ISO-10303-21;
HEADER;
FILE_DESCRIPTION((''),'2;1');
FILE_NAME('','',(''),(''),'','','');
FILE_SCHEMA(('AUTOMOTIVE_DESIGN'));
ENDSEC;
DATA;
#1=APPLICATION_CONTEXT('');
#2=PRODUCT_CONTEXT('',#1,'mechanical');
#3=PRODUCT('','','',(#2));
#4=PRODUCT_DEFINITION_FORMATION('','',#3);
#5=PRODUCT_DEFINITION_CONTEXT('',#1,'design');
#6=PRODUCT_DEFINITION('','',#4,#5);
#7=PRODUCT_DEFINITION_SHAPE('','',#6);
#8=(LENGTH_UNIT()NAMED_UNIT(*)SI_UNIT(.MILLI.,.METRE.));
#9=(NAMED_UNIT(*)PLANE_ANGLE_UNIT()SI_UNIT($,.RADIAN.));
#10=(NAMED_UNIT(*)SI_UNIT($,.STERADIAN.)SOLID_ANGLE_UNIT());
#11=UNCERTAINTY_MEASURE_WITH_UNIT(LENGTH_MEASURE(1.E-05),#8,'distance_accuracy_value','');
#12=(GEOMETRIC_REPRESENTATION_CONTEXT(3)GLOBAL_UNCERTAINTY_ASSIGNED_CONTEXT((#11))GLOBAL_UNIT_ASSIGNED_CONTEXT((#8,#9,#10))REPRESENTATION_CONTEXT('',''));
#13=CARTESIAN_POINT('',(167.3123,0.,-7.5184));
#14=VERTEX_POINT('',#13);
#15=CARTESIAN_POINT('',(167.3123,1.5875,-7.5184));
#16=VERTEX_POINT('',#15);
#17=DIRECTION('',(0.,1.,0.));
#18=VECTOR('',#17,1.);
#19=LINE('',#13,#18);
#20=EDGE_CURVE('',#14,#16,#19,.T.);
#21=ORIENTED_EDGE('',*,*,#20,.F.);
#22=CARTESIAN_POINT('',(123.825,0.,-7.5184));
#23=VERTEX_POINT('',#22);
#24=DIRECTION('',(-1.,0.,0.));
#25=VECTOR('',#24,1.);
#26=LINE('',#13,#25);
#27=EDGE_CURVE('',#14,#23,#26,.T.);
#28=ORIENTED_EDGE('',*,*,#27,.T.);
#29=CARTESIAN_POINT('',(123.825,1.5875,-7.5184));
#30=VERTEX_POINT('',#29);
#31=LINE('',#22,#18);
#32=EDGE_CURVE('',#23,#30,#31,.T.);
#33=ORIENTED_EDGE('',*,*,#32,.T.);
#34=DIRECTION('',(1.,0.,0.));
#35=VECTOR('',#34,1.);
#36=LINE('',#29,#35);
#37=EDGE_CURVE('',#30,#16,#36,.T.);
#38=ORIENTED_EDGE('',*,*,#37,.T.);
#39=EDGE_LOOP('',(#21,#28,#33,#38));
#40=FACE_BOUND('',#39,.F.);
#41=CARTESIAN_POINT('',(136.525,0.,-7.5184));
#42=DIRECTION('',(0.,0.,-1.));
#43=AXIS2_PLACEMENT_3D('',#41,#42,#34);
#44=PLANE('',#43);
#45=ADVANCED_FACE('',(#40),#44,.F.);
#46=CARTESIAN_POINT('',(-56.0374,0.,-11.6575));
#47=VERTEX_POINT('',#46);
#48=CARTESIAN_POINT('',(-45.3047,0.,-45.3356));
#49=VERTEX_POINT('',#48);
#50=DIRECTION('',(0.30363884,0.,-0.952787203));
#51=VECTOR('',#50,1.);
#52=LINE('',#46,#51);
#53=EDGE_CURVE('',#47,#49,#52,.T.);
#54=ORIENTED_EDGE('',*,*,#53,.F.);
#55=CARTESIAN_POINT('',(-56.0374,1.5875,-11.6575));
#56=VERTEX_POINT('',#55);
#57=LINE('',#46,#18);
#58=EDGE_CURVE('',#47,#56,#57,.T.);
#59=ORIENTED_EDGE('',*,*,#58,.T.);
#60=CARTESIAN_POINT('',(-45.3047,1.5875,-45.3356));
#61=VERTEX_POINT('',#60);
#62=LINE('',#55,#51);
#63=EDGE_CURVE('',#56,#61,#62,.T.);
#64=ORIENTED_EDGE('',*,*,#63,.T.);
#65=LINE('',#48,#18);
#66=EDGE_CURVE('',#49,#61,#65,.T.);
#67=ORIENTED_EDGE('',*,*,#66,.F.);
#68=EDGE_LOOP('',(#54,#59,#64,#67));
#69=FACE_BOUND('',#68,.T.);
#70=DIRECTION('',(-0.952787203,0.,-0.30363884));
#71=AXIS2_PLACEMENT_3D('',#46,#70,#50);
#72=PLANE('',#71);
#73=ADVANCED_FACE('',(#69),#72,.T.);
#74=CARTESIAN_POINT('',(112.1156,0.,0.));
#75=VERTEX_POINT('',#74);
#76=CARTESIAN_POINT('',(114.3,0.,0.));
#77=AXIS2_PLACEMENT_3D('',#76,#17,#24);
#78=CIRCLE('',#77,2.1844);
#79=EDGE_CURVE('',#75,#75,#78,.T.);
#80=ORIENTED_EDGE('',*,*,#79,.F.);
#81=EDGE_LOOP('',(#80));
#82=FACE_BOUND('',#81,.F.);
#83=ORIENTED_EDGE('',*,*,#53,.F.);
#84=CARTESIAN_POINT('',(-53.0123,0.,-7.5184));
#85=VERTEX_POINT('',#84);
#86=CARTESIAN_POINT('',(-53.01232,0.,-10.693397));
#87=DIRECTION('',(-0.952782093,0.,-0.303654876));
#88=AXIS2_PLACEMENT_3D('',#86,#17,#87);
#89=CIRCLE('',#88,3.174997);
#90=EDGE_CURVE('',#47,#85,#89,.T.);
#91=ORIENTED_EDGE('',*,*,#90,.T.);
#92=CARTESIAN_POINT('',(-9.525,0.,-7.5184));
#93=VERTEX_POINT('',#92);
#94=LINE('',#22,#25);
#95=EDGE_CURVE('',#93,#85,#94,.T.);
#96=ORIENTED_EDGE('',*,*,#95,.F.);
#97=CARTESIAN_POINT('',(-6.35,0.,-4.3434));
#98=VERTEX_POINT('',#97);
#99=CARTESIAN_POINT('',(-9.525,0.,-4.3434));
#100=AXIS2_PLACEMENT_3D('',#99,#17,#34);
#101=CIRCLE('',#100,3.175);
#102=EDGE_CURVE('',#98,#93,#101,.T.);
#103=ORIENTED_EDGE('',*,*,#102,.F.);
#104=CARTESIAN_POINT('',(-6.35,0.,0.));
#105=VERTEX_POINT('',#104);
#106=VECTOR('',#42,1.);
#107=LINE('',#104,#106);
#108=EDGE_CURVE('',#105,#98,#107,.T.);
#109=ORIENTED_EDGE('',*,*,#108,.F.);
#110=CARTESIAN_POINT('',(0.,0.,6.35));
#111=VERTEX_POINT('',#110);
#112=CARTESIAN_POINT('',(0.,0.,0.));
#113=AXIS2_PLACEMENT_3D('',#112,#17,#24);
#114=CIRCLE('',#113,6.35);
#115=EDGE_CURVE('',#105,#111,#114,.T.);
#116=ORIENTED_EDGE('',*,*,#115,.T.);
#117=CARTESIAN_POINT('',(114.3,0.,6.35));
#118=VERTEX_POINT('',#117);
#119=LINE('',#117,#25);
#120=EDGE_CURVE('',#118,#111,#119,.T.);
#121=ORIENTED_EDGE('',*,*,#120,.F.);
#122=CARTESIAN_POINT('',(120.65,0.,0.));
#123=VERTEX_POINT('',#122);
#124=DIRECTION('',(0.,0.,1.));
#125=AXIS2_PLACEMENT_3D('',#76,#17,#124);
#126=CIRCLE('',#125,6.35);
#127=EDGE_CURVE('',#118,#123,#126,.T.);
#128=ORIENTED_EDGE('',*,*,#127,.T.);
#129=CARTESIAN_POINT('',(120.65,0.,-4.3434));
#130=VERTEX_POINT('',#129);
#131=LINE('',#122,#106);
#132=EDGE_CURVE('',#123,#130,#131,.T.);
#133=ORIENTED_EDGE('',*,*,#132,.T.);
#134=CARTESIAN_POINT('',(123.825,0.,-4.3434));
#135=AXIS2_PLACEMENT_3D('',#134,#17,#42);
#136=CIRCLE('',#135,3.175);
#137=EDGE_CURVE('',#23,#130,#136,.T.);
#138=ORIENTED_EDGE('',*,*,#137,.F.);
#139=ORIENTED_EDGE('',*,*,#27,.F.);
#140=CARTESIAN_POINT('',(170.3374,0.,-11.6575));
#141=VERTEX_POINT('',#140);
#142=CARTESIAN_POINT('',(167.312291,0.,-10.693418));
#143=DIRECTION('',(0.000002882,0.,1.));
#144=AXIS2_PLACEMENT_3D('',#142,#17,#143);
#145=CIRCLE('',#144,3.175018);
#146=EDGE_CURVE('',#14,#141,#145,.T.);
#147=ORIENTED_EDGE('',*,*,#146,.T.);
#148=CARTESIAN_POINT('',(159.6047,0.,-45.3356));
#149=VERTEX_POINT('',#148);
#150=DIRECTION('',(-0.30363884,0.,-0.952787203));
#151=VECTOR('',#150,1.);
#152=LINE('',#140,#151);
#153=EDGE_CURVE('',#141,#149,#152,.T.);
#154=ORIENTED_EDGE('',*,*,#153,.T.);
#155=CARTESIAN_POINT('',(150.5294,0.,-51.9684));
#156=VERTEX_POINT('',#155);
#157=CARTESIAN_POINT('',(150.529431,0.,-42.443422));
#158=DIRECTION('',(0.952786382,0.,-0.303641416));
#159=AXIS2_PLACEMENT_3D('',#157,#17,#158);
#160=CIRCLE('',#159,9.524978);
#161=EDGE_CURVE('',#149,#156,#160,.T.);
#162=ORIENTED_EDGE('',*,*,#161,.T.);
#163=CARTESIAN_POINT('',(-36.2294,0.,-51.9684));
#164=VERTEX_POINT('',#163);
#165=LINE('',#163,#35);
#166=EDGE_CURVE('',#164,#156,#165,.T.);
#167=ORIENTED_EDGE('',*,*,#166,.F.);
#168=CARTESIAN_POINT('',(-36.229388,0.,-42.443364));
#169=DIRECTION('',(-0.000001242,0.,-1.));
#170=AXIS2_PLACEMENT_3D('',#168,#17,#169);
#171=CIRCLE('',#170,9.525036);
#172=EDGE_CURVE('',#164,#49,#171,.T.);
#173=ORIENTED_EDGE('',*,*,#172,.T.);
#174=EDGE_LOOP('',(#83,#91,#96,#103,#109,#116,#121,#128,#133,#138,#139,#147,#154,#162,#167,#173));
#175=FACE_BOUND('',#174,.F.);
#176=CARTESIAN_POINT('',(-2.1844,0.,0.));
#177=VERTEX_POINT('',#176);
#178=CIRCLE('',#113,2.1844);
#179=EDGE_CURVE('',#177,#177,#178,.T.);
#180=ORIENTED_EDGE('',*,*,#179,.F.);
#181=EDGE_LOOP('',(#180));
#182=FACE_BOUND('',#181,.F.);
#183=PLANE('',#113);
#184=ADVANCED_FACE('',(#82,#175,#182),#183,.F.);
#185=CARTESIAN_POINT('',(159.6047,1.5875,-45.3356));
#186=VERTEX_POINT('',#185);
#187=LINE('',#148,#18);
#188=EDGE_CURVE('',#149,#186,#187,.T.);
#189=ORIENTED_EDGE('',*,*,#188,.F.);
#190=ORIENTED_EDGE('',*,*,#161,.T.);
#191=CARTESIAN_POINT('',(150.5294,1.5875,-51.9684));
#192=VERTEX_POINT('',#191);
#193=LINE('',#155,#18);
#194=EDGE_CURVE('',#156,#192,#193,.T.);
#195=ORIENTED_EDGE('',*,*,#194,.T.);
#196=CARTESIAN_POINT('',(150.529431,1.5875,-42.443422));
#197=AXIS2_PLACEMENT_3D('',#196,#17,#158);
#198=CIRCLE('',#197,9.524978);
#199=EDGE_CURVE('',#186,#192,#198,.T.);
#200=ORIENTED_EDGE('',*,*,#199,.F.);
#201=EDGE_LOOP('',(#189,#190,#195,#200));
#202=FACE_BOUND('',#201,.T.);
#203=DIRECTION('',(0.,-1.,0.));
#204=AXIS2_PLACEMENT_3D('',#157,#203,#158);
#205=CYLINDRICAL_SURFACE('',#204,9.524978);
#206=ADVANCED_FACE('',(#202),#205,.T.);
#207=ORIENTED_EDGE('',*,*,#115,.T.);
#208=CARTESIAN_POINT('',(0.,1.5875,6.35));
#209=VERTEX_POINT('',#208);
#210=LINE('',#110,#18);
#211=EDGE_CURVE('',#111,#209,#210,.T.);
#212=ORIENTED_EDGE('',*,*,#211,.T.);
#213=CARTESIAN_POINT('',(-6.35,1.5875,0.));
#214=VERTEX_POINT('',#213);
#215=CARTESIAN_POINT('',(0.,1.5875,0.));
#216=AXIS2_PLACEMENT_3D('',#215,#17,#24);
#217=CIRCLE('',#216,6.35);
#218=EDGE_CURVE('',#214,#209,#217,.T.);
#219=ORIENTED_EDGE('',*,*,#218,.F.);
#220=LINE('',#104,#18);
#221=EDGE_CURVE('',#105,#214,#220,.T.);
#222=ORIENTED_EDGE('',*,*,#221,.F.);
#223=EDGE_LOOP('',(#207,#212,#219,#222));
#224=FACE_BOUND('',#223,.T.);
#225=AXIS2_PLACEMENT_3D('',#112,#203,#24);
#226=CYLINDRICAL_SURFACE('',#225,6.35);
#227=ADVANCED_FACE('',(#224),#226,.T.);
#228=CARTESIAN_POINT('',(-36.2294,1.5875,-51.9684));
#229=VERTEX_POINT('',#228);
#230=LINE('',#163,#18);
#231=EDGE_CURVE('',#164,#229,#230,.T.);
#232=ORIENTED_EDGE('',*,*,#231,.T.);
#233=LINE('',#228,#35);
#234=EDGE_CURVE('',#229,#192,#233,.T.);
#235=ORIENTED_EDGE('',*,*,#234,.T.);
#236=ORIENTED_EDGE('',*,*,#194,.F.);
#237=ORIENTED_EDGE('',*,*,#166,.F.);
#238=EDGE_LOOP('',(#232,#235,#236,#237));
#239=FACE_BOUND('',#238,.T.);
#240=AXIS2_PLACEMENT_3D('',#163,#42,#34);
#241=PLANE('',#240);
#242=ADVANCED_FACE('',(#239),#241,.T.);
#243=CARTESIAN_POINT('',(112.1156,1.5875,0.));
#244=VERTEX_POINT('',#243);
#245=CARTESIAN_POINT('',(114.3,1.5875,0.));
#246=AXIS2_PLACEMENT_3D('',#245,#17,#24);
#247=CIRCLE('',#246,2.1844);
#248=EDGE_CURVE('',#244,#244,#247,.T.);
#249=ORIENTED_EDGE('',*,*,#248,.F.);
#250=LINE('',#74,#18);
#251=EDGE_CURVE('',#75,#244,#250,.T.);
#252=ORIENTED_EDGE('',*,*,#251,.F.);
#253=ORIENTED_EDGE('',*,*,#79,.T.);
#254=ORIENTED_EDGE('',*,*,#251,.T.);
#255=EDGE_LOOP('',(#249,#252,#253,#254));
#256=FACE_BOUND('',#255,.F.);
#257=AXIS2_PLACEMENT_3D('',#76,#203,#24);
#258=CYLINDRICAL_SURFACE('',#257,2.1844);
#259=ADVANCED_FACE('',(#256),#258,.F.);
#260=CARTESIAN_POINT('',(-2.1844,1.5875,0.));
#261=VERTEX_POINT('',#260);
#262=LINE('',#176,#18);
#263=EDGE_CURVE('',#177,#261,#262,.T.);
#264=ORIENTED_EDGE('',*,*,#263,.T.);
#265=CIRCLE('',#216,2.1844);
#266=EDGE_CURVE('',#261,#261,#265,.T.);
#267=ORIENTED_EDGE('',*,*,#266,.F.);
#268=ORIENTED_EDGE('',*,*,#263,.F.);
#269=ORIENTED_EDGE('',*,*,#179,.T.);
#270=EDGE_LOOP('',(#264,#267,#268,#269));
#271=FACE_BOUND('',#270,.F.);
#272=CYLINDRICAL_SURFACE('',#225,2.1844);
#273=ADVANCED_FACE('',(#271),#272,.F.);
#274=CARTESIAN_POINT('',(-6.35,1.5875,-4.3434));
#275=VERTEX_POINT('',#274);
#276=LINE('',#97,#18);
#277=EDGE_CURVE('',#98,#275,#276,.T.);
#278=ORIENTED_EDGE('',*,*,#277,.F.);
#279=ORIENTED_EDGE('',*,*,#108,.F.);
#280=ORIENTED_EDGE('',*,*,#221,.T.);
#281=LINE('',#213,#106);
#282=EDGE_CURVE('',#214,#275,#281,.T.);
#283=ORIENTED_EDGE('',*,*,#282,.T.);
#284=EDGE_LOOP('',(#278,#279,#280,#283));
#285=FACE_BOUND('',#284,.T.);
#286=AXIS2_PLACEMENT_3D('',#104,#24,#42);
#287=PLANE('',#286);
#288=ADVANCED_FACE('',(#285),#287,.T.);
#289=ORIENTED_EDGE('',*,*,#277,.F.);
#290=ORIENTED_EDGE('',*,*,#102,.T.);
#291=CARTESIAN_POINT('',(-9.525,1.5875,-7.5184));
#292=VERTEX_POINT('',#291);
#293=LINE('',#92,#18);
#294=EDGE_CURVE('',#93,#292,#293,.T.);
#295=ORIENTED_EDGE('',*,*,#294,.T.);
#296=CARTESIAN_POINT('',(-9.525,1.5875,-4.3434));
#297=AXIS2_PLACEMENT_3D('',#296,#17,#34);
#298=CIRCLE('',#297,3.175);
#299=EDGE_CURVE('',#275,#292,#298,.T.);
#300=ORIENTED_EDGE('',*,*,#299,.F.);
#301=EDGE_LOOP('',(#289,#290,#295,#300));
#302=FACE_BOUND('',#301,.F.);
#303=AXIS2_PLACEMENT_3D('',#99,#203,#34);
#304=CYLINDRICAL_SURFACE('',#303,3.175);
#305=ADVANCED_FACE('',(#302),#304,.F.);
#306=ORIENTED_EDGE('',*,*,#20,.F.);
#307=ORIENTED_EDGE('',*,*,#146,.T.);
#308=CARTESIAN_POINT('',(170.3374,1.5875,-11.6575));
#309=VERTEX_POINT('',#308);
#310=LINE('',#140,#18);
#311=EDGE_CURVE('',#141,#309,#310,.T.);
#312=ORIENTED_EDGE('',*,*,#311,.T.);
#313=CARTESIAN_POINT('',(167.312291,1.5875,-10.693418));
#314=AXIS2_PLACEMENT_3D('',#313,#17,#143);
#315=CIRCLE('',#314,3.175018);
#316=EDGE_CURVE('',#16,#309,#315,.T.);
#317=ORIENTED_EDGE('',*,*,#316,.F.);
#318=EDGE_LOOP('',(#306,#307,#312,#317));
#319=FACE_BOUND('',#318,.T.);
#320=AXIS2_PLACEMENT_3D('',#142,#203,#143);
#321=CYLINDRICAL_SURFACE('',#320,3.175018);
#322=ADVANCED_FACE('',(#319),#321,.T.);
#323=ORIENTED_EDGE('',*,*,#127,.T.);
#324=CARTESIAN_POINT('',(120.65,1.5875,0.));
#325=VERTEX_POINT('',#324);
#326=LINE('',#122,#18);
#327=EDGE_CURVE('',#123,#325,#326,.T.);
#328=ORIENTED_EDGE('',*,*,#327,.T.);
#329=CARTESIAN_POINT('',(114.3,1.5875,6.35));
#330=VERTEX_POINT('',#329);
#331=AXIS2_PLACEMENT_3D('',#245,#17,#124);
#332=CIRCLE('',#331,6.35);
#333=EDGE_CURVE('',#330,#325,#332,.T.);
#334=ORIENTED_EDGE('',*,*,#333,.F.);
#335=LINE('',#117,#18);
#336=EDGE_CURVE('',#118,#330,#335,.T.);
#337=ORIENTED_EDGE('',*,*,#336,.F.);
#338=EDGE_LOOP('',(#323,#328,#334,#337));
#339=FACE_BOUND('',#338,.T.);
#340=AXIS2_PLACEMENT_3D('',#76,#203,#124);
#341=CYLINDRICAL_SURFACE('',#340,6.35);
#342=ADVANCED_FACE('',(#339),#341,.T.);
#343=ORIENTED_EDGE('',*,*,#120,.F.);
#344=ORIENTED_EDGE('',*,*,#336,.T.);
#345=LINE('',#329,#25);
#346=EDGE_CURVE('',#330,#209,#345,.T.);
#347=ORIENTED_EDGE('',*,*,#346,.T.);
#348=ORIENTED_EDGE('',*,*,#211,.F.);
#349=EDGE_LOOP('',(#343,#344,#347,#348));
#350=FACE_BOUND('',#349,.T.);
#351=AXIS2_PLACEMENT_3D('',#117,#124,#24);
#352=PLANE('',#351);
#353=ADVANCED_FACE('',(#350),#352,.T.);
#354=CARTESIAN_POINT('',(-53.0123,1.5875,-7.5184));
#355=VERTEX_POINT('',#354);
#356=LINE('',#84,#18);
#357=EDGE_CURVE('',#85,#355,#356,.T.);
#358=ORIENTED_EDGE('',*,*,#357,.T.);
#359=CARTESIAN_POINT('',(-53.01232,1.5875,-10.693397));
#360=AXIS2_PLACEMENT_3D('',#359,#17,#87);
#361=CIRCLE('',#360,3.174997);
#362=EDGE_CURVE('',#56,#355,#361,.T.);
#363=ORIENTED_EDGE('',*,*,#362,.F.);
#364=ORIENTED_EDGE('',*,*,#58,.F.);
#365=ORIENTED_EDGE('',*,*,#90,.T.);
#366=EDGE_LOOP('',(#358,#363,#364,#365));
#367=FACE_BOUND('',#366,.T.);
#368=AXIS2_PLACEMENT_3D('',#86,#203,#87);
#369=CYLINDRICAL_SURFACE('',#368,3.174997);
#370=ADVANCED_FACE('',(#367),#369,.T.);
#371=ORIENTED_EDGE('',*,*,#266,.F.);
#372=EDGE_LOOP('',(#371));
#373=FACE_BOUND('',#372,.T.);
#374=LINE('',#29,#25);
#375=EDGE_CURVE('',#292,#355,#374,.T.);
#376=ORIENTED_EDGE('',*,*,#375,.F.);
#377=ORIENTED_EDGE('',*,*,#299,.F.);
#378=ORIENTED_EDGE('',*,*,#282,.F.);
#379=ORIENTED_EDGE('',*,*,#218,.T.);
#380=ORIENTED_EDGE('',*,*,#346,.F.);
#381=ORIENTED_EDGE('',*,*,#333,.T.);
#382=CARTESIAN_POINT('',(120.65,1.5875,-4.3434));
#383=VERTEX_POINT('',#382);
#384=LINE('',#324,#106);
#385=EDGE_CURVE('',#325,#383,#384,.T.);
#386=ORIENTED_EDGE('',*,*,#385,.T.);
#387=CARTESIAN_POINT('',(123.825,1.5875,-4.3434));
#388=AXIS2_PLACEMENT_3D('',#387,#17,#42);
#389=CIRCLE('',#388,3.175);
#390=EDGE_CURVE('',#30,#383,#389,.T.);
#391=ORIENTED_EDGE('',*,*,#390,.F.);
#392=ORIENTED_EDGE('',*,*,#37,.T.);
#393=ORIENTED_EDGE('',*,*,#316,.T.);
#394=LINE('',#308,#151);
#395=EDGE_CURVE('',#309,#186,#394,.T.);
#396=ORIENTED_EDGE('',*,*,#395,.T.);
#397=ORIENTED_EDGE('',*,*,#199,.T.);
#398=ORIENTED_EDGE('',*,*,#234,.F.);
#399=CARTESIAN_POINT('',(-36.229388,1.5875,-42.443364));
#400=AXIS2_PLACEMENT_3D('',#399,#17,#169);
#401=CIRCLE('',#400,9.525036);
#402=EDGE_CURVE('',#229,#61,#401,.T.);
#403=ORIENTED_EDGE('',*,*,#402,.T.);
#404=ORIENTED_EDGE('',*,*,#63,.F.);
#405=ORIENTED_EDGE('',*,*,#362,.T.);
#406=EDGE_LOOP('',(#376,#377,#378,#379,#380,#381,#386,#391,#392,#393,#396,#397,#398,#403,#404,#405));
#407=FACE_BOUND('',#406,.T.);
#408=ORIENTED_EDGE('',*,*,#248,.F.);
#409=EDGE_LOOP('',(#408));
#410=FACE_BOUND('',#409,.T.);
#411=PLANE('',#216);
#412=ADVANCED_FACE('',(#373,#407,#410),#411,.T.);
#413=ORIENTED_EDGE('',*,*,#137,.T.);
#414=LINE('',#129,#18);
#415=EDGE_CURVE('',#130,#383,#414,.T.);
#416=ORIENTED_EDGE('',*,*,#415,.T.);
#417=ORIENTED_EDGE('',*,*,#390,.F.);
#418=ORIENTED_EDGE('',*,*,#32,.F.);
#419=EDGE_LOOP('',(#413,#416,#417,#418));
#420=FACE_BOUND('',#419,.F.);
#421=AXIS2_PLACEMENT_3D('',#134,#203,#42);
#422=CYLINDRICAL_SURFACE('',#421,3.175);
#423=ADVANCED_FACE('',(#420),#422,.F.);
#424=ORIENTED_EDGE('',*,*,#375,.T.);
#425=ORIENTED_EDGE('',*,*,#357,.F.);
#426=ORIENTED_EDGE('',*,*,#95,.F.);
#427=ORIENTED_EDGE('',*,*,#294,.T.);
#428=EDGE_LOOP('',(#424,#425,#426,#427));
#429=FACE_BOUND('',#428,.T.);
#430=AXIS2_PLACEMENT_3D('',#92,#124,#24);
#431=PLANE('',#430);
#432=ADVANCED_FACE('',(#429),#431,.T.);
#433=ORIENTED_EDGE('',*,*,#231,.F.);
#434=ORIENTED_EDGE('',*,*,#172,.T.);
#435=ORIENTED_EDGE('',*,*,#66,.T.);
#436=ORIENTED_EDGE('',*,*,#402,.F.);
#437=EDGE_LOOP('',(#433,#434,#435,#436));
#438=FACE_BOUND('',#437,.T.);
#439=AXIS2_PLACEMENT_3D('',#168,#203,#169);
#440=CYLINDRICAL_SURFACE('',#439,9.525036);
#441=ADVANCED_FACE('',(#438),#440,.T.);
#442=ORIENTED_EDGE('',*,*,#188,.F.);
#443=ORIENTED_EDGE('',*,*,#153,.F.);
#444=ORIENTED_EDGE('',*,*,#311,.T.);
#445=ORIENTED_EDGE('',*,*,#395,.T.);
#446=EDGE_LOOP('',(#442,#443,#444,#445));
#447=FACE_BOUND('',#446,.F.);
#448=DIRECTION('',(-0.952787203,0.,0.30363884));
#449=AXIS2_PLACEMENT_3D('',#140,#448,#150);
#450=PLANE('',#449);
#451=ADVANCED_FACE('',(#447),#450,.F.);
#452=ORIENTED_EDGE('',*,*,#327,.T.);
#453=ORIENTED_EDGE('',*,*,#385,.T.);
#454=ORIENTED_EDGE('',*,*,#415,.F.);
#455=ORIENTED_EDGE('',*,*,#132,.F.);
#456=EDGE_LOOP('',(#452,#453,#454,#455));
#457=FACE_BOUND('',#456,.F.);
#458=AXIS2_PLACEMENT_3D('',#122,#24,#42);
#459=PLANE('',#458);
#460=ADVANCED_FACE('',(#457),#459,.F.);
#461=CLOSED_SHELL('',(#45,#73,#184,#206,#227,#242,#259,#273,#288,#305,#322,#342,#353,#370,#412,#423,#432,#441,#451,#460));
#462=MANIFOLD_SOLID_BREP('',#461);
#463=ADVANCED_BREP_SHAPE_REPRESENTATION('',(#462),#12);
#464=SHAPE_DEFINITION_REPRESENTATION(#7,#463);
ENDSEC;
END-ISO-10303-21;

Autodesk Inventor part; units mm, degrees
ref_plane "YZ Plane" through (0, 0, 0) normal (1, 0, 0) x (0, 1, 0)
ref_plane "XZ Plane" through (0, 0, 0) normal (0, 1, 0) x (-1, 0, 0)
ref_plane "XY Plane" through (0, 0, 0) normal (0, 0, 1) x (1, 0, 0)
sketch "main" plane through (0, 0, 0) normal (0, 0, 1) x (1, 0, 0)
  line L0 (-49.2738, 43.4655) -> (65.0262, 43.4655)
  circle A0 centre (65.0262, 37.1155) radius 2.1844
  line L1 (71.3762, 37.1155) -> (71.3762, 32.7721)
  arc A1 (71.3762, 37.1155) -> (65.0262, 43.4655) centre (65.0262, 37.1155) ccw
  line L2 (-71.4988, 29.5971) -> (-102.2861, 29.5971)
  line L3 (-105.3112, 25.4581) -> (-94.5785, -8.22)
  line L4 (-58.7988, 29.5971) -> (118.0384, 29.5971)
  line L5 (121.0635, 25.4581) -> (110.3309, -8.22)
  line L6 (101.2556, -14.8529) -> (-85.5032, -14.8529)
  arc A2 (-94.5785, -8.22) -> (-85.5032, -14.8529) centre (-85.5032, -5.3279) ccw
  arc A3 (101.2556, -14.8529) -> (110.3309, -8.22) centre (101.2556, -5.3279) ccw
  arc A4 (-102.2861, 29.5971) -> (-105.3112, 25.4581) centre (-102.2861, 26.4221) ccw
  arc A5 (121.0635, 25.4581) -> (118.0384, 29.5971) centre (118.0384, 26.4221) ccw
  arc A6 (71.3762, 32.7721) -> (74.5512, 29.5971) centre (74.5512, 32.7721) ccw
  line L7 (-58.7988, 29.5971) -> (-71.4988, 29.5971)
  circle A7 centre (-49.2738, 37.1155) radius 2.1844
  arc A8 (-49.2738, 43.4655) -> (-55.6238, 37.1155) centre (-49.2738, 37.1155) ccw
  line L8 (-55.6238, 37.1155) -> (-55.6238, 32.7721)
  arc A9 (-58.7988, 29.5971) -> (-55.6238, 32.7721) centre (-58.7988, 32.7721) ccw
  point P0 (1.5262, 9.2461)
  point P1 (-55.8302, 29.5971)
  point P2 (-106.6302, 29.5971)
  point P3 (-92.4647, -14.8529)
  point P4 (122.3826, 29.5971)
  point P5 (108.2171, -14.8529)
  dimension "d0" = 12.7
  dimension "d11" = 50.8
  dimension "d17" = 9.525
  dimension "d18" = 9.525
  dimension "d19" = 3.175
  dimension "d20" = 3.175
  dimension "d23" = 44.45
  dimension "d24" = 4.3688
  dimension "d25" = 186.7588
  dimension "d26" = 3.175
sketch "Sketch1" plane through (0, 0, 0) normal (0, 1, 0) x (-1, 0, 0)
  line L0 (-114.3, 6.35) -> (0, 6.35)
  circle A0 centre (0, 0) radius 2.1844
  line L1 (6.35, 0) -> (6.35, -4.3434)
  arc A1 (6.35, 0) -> (0, 6.35) centre (0, 0) ccw
  line L2 (-136.525, -7.5184) -> (-167.3123, -7.5184)
  line L3 (-170.3374, -11.6575) -> (-159.6047, -45.3356)
  line L4 (-123.825, -7.5184) -> (53.0123, -7.5184)
  line L5 (56.0374, -11.6575) -> (45.3047, -45.3356)
  line L6 (36.2294, -51.9684) -> (-150.5294, -51.9684)
  arc A2 (-159.6047, -45.3356) -> (-150.5294, -51.9684) centre (-150.5294, -42.4434) ccw
  arc A3 (36.2294, -51.9684) -> (45.3047, -45.3356) centre (36.2294, -42.4434) ccw
  arc A4 (-167.3123, -7.5184) -> (-170.3374, -11.6575) centre (-167.3123, -10.6934) ccw
  arc A5 (56.0374, -11.6575) -> (53.0123, -7.5184) centre (53.0123, -10.6934) ccw
  arc A6 (6.35, -4.3434) -> (9.525, -7.5184) centre (9.525, -4.3434) ccw
  line L7 (-123.825, -7.5184) -> (-136.525, -7.5184)
  circle A7 centre (-114.3, 0) radius 2.1844
  arc A8 (-114.3, 6.35) -> (-120.65, 0) centre (-114.3, 0) ccw
  line L8 (-120.65, 0) -> (-120.65, -4.3434)
  arc A9 (-123.825, -7.5184) -> (-120.65, -4.3434) centre (-123.825, -4.3434) ccw
extrude "Extrusion1" add sketch "Sketch1" along normal blind 1.5875
feature "Bend Part2" [suppressed]
equation "\"BendRadius\" = Thickness"
equation "\"BendReliefWidth\" = Thickness"
equation "\"BendReliefDepth\" = 0.5 * Thickness"
equation "\"CornerReliefSize\" = 4 * Thickness"
equation "\"MinimumRemnant\" = 2 * Thickness"
equation "\"TransitionRadius\" = BendRadius"
equation "\"JacobiRadiusSize\" = BendRadius"
equation "\"GapSize\" = Thickness"
equation "\"Thickness\" = 1.5875"
properties part number "intake_wedge" material "Acetal Resin, White"
